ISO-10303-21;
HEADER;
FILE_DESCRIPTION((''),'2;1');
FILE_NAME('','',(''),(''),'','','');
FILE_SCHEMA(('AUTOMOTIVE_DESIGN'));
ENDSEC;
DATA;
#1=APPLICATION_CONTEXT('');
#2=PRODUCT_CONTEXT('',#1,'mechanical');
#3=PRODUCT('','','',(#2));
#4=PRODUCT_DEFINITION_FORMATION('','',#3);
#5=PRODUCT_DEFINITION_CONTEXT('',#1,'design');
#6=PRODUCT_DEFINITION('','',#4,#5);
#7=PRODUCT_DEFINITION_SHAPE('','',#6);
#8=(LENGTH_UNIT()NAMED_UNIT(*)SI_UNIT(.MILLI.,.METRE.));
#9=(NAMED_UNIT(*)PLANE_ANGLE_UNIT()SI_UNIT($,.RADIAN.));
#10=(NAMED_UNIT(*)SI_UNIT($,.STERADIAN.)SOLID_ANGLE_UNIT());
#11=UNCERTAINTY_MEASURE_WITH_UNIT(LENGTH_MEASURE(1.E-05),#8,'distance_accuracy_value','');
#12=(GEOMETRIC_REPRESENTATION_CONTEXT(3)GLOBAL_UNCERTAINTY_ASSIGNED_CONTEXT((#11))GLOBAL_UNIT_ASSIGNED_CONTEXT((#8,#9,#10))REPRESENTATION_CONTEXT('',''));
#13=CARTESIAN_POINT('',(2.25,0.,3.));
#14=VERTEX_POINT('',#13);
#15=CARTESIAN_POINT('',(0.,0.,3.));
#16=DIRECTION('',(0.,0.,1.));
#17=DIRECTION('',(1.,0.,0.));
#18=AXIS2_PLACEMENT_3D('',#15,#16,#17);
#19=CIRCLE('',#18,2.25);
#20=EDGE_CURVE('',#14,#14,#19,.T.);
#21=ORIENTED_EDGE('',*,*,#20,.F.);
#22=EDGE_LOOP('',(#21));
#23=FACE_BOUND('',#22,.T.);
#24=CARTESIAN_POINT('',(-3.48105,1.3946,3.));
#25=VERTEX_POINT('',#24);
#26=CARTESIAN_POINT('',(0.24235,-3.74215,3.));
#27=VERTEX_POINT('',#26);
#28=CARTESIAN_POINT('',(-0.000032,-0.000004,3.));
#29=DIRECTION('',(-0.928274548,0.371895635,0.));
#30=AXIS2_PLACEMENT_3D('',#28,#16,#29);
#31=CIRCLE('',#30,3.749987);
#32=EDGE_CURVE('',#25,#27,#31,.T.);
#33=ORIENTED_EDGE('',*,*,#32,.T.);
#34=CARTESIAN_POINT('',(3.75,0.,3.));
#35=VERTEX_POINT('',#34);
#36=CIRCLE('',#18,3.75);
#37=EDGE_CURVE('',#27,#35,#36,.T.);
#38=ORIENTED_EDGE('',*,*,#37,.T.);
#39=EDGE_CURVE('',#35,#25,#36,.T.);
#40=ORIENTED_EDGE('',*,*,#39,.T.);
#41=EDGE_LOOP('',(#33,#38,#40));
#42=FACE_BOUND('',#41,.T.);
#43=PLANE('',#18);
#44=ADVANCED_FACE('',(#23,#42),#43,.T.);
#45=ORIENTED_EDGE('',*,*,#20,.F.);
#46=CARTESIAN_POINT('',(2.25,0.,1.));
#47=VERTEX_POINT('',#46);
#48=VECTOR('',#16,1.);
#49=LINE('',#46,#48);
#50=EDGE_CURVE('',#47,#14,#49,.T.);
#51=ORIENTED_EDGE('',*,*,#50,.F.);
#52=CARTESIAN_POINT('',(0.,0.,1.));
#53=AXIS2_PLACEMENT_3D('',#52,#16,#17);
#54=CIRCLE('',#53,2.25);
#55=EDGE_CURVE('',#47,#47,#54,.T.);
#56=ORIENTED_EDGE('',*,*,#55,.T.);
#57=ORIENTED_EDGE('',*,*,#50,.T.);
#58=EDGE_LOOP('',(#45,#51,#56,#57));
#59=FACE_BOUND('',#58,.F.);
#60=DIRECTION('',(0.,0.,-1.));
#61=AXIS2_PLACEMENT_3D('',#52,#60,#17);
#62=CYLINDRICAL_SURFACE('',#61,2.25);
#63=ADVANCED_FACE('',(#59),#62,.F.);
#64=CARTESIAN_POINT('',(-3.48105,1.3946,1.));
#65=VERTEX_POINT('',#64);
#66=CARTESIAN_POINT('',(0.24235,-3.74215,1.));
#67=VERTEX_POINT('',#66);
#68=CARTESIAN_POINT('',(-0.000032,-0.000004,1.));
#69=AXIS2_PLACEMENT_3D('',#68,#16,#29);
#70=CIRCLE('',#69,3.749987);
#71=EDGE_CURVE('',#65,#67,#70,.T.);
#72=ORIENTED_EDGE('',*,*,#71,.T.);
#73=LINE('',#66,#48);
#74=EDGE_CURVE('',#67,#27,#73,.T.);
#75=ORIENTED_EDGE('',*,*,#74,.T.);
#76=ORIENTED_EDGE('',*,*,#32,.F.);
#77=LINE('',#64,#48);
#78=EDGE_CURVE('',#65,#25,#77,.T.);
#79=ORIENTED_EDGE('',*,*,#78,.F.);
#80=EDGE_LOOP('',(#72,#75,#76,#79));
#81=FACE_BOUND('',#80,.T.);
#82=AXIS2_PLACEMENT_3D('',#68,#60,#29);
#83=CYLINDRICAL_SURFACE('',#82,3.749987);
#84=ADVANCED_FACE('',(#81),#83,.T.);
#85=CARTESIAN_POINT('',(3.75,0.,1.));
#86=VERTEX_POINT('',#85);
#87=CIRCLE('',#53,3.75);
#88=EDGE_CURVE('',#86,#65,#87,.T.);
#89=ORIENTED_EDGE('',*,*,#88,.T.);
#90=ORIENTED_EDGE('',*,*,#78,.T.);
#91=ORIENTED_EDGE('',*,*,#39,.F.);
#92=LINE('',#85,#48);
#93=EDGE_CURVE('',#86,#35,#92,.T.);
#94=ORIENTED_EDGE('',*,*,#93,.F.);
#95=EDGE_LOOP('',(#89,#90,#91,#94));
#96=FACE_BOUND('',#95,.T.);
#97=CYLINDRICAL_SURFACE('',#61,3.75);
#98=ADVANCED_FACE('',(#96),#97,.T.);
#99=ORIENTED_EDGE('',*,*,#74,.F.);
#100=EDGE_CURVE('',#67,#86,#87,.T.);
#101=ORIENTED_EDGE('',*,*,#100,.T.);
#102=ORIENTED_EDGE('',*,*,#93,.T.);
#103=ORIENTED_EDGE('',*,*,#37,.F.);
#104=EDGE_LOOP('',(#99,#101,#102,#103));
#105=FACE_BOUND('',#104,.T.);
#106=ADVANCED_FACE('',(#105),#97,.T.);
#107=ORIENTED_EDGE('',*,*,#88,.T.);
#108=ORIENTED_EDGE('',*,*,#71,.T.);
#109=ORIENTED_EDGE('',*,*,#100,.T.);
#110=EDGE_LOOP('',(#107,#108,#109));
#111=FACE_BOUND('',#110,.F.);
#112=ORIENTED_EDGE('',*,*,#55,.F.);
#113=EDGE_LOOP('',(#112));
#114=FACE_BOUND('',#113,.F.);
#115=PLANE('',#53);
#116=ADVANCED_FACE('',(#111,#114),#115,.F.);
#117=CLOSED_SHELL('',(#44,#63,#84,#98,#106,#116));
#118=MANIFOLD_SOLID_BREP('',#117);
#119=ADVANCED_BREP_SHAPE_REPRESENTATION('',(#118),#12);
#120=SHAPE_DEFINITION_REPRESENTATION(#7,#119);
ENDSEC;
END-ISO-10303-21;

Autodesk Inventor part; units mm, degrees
ref_plane "YZ Plane" through (0, 0, 0) normal (1, 0, 0) x (0, 1, 0)
ref_plane "XZ Plane" through (0, 0, 0) normal (0, 1, 0) x (-1, 0, 0)
ref_plane "XY Plane" through (0, 0, 0) normal (0, 0, 1) x (1, 0, 0)
sketch "Sketch1" plane through (0, 0, 0) normal (0, 0, 1) x (1, 0, 0)
  circle A0 centre (0, 0) radius 4.5 projected
  circle A1 centre (0, 0) radius 4 projected
  arc A2 (-6.9621, 2.7892) -> (0.4847, -7.4843) centre (0, 0) ccw projected
  circle A3 centre (0, 0) radius 7.5
  point P0 (0, 0)
extrude "Extrusion1" add sketch "Sketch1" along normal blind 4 contours A3 A2
scale "Scale1" factors (0.5, 0.5, 0.5) then translate (0, 0, 1) bodies 1
equation "\"BendRadius\" = Thickness"
equation "\"BendReliefWidth\" = Thickness"
equation "\"BendReliefDepth\" = 0.5 * Thickness"
equation "\"CornerReliefSize\" = 4 * Thickness"
equation "\"MinimumRemnant\" = 2 * Thickness"
equation "\"TransitionRadius\" = BendRadius"
equation "\"JacobiRadiusSize\" = Thickness"
equation "\"GapSize\" = Thickness"
equation "\"Thickness\" = 0.5"
properties part number "washer"
